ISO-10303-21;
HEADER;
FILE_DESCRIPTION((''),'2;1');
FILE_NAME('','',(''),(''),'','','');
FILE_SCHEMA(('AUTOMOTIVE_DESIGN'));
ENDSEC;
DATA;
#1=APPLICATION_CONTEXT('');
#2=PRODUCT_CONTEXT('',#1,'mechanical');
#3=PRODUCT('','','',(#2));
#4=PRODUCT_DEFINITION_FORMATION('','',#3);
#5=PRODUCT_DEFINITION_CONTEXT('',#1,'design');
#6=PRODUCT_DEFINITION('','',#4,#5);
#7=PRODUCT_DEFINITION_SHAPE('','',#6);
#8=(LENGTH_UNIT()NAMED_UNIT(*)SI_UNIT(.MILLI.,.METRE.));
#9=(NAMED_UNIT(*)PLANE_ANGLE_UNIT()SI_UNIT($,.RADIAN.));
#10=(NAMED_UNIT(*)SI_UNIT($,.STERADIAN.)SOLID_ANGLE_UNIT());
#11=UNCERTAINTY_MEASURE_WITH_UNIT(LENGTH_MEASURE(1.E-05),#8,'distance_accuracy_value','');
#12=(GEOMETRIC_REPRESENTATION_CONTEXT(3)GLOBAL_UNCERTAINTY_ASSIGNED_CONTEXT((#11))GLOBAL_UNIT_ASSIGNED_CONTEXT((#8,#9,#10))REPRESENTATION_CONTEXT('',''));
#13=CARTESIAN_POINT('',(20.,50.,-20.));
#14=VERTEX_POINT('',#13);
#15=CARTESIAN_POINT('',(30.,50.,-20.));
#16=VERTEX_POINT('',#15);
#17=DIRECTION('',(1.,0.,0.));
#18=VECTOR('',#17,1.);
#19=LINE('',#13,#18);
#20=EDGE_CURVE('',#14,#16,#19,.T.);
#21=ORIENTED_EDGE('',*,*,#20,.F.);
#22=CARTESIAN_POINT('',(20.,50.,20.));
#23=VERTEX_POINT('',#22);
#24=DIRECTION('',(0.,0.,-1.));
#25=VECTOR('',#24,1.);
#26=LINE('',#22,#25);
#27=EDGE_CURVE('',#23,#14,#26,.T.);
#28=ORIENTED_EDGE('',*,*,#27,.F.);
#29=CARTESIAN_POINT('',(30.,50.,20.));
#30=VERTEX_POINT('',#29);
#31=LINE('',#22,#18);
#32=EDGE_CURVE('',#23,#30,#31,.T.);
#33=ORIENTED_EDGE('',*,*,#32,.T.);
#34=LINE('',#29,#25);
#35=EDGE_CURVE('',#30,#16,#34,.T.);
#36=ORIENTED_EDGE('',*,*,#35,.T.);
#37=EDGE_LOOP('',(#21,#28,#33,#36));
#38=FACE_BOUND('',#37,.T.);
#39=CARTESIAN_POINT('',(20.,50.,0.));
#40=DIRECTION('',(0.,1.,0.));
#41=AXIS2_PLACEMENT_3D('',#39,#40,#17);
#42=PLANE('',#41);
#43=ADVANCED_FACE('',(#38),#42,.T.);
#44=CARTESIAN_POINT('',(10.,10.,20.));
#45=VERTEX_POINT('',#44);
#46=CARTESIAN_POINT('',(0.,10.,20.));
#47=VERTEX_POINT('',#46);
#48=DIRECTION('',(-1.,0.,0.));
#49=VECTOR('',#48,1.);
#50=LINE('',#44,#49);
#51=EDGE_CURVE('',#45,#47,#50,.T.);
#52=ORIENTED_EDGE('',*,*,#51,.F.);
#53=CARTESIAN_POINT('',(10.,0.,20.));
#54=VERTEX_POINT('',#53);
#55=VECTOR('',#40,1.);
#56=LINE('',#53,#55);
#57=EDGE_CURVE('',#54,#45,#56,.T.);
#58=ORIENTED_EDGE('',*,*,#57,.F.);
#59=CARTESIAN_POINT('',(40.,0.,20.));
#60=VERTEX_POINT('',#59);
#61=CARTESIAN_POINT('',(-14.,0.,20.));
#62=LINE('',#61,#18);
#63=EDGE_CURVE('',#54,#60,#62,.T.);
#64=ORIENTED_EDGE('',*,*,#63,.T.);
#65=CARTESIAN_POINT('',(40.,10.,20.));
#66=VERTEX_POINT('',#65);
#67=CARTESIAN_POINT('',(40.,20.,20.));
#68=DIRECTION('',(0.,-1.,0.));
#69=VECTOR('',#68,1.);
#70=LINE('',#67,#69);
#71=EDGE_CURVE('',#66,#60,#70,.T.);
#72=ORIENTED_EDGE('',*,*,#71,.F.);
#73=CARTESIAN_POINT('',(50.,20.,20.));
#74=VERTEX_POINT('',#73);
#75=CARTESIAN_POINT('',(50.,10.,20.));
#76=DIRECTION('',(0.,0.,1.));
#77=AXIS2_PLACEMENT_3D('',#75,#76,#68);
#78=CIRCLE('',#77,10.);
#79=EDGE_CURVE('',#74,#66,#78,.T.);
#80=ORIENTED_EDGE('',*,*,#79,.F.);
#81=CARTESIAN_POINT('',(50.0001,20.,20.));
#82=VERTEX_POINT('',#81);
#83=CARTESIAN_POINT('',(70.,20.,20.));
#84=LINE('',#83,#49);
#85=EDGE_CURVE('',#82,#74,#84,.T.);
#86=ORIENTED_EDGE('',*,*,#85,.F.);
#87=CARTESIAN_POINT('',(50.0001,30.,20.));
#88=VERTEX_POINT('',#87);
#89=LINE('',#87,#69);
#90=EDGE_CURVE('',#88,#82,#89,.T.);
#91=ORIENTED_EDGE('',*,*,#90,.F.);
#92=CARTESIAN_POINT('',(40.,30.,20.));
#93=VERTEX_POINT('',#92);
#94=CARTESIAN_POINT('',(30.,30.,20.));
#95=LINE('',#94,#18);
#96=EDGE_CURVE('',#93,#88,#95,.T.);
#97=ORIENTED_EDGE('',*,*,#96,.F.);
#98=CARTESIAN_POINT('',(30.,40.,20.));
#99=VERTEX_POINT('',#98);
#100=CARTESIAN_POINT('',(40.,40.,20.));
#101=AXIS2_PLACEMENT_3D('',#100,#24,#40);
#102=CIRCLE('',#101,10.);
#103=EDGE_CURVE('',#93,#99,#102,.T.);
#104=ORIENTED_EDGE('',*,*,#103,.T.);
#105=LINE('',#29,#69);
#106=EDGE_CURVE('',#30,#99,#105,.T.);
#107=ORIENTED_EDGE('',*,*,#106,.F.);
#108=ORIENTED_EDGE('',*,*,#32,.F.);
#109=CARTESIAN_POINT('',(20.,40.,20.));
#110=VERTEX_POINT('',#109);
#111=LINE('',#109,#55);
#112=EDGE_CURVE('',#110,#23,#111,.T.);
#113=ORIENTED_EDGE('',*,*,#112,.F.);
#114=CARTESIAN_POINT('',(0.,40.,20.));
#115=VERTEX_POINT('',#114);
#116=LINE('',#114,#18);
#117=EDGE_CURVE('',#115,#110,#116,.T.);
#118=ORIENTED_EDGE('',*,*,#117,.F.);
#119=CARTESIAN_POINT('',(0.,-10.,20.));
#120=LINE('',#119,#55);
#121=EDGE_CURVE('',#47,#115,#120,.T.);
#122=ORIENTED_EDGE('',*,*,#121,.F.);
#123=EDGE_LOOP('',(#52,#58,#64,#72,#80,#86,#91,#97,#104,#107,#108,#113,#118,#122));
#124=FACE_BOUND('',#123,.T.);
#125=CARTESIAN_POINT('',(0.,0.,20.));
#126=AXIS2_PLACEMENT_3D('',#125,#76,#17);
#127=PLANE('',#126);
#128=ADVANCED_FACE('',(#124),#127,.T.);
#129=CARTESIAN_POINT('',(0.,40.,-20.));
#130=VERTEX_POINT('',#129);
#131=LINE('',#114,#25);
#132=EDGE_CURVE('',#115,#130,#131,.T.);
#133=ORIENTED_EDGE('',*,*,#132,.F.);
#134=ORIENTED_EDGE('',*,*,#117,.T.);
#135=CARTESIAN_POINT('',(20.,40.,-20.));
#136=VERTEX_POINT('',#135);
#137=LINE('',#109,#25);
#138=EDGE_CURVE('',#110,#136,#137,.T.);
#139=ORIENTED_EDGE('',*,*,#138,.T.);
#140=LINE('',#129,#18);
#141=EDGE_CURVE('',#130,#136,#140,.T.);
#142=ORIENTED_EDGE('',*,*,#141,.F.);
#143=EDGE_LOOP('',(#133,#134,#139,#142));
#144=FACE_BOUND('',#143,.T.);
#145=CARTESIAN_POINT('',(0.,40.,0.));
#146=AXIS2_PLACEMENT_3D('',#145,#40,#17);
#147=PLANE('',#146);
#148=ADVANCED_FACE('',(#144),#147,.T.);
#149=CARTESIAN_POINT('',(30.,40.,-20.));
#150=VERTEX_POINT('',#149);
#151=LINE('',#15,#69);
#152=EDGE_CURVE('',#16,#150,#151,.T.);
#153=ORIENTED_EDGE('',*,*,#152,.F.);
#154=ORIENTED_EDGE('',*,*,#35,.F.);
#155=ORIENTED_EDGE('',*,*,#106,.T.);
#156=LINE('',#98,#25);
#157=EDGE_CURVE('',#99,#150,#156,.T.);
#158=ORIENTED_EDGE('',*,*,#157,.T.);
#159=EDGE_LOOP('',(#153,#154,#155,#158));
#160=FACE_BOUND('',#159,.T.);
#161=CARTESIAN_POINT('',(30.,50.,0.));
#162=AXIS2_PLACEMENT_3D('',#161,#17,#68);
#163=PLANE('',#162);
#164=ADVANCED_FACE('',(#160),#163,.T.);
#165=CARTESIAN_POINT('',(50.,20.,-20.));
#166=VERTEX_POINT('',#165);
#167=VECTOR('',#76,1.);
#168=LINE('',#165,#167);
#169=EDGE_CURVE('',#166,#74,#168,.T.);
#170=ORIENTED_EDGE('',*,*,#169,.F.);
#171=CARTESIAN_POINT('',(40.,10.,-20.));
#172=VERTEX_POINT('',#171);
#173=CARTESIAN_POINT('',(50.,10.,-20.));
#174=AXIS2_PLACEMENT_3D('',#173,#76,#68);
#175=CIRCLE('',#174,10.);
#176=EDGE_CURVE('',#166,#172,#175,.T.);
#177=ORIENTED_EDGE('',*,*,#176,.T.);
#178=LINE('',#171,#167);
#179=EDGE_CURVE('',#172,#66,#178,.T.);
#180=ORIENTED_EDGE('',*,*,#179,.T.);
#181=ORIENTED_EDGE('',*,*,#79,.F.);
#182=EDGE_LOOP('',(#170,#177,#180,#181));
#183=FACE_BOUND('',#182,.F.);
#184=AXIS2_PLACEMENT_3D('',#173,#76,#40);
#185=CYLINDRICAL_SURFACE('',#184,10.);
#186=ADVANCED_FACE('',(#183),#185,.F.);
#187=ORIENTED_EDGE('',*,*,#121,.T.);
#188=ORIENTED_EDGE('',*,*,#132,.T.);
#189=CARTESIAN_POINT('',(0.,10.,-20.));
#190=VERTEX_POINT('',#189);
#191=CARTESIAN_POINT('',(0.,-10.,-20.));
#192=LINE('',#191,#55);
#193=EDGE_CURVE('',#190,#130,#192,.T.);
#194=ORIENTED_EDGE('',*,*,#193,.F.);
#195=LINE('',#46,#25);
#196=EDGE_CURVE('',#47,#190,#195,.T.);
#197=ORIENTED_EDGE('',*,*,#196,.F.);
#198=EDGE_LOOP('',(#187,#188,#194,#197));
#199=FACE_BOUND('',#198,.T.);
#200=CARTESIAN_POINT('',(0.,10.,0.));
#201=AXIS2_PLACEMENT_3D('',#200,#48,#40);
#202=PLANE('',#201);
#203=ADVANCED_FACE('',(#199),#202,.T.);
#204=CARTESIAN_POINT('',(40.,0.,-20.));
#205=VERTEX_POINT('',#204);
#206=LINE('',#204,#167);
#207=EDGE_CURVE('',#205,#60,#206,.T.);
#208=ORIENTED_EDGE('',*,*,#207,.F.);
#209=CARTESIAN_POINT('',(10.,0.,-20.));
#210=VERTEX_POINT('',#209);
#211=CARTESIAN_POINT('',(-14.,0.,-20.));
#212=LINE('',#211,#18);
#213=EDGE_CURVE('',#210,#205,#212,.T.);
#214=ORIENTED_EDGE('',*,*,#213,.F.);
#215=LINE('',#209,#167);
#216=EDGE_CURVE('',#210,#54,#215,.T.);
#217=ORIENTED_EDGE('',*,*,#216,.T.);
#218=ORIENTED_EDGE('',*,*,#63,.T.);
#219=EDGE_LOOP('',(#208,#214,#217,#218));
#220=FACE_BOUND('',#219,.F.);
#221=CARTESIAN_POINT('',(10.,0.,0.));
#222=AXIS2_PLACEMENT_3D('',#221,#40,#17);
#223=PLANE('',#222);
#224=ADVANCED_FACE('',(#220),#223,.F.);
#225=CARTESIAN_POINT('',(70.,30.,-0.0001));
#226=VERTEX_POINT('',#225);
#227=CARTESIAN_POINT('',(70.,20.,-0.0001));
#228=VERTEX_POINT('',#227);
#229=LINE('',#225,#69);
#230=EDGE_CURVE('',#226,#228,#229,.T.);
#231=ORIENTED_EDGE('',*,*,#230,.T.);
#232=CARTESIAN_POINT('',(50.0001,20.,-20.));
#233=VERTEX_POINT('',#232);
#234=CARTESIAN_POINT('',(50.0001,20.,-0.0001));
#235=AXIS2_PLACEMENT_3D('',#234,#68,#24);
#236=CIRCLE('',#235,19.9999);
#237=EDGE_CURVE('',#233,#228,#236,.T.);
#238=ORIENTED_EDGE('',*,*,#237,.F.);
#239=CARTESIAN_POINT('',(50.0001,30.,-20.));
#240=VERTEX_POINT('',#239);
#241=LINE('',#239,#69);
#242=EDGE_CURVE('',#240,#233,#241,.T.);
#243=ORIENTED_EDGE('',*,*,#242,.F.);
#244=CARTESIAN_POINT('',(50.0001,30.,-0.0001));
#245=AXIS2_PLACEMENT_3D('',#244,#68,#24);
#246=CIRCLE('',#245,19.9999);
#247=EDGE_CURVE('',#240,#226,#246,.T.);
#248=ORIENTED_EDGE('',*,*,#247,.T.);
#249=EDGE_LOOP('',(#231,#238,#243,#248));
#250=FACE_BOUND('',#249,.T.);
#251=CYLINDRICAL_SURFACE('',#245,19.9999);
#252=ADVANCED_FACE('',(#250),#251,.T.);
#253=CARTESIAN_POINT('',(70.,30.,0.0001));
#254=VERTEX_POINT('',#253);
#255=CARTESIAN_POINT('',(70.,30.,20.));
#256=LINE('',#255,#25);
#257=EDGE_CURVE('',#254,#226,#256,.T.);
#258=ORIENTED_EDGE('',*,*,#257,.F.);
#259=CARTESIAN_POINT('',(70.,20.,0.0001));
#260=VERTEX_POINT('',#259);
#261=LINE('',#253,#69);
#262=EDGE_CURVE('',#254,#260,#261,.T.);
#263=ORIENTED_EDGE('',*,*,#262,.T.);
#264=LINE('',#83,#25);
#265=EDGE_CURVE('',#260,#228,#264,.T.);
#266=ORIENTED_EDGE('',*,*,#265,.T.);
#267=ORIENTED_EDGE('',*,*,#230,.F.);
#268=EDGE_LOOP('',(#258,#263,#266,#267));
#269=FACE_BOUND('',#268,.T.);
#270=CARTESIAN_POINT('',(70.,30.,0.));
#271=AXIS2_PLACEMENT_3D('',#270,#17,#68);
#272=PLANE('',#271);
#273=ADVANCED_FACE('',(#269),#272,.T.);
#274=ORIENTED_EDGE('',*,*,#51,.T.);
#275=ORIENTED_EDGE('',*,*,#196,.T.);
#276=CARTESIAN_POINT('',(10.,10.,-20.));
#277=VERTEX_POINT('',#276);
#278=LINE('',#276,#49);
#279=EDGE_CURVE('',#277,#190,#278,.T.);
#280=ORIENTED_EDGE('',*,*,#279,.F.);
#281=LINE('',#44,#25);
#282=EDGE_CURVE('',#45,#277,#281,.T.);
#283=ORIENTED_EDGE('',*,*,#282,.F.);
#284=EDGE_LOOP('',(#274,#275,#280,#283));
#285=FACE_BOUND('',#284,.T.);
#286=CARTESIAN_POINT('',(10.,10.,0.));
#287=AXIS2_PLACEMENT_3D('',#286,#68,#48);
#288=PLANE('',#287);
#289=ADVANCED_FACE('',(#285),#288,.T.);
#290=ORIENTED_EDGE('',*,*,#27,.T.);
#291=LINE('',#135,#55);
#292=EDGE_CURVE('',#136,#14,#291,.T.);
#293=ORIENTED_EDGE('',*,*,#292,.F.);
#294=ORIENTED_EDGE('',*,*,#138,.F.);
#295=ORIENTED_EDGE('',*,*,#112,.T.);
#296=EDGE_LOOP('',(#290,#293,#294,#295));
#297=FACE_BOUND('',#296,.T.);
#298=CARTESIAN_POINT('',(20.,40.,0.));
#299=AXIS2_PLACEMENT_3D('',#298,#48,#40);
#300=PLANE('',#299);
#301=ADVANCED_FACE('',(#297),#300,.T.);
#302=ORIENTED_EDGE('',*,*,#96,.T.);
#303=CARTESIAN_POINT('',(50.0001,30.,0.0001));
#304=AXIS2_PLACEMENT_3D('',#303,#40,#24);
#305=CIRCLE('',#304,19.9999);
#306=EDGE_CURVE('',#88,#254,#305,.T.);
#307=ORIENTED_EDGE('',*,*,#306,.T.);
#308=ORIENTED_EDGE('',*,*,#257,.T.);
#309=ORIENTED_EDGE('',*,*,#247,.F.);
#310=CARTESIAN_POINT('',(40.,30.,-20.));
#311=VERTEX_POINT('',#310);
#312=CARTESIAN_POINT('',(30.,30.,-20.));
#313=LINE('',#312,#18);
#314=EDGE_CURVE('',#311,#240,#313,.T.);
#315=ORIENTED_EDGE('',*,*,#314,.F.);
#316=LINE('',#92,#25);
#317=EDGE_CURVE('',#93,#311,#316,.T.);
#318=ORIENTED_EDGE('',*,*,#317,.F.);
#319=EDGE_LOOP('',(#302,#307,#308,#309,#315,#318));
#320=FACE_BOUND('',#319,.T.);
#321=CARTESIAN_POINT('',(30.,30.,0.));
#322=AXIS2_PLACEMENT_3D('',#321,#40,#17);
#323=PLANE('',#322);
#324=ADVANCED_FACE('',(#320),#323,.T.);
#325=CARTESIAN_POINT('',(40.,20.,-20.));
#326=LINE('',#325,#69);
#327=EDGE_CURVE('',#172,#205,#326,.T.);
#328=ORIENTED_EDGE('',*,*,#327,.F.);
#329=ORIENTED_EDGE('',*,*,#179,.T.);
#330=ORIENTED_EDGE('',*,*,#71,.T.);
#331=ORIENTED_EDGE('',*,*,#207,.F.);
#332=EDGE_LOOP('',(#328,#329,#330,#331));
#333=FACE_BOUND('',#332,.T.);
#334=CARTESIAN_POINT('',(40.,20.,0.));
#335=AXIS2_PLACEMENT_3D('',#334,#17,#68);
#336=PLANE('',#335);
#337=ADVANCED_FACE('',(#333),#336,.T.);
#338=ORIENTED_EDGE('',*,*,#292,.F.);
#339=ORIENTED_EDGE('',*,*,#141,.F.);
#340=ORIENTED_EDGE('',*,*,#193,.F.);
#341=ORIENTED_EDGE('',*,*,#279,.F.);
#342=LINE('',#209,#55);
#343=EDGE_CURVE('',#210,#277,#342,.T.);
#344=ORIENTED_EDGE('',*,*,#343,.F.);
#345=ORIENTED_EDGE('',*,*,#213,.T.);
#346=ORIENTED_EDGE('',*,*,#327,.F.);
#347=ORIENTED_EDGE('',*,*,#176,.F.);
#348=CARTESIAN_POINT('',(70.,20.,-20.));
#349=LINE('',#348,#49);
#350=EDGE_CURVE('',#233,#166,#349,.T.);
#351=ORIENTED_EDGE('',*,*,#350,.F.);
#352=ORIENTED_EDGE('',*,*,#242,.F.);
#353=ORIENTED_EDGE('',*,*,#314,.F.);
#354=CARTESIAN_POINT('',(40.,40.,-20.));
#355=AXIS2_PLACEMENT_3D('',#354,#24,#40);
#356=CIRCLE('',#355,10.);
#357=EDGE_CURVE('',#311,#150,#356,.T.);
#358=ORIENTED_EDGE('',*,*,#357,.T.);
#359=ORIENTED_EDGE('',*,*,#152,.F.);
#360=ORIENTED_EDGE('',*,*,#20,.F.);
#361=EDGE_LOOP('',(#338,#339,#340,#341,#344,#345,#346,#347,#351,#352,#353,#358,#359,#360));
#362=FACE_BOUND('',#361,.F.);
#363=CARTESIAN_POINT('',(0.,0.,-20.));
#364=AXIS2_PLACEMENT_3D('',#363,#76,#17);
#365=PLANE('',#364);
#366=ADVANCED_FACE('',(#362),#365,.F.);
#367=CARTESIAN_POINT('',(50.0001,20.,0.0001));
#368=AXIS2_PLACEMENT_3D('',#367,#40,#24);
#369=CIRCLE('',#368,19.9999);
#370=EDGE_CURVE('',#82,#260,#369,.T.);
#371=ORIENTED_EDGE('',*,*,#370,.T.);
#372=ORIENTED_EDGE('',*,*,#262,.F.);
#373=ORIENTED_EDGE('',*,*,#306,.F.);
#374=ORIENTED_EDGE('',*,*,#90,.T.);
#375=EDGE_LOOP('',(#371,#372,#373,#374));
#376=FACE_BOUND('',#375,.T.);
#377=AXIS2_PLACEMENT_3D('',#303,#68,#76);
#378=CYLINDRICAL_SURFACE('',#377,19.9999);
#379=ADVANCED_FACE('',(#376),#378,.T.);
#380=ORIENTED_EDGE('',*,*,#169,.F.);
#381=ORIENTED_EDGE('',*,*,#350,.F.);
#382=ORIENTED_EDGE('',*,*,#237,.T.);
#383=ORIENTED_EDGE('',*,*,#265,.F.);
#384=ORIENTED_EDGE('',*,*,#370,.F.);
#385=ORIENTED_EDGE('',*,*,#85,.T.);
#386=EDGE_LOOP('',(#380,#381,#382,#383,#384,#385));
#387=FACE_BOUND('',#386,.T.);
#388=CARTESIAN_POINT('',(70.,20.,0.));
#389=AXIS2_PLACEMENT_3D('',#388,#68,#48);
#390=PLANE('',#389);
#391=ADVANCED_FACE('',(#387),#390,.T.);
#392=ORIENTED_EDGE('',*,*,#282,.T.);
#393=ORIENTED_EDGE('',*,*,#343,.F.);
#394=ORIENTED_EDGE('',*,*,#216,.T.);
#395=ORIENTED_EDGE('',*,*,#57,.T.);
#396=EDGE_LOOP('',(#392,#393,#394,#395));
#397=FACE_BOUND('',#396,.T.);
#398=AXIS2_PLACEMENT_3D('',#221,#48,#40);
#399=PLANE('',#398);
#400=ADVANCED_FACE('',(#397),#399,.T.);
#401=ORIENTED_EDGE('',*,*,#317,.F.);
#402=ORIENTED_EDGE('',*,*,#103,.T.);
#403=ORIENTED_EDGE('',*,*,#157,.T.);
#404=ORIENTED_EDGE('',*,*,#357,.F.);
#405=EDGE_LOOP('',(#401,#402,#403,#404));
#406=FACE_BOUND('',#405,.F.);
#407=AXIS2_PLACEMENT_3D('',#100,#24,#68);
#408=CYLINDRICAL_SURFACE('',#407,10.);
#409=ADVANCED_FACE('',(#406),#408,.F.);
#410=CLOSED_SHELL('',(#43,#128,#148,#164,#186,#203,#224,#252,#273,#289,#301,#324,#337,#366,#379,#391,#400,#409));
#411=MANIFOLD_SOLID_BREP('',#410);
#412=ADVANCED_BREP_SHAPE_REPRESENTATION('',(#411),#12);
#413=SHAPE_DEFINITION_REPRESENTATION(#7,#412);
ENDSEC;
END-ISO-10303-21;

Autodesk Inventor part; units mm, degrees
ref_plane "YZ Plane" through (0, 0, 0) normal (1, 0, 0) x (0, 1, 0)
ref_plane "XZ Plane" through (0, 0, 0) normal (0, 1, 0) x (-1, 0, 0)
ref_plane "XY Plane" through (0, 0, 0) normal (0, 0, 1) x (1, 0, 0)
sketch "草圖1" plane through (0, 0, 0) normal (0, 0, 1) x (1, 0, 0)
  line L0 (-14, 0) -> (84, 0) projected
  line L1 (0, -10) -> (0, 60) projected
  line L2 (0, 10) -> (0, 40)
  line L3 (0, 40) -> (20, 40)
  line L4 (20, 40) -> (20, 50)
  line L5 (20, 50) -> (30, 50)
  line L6 (30, 50) -> (30, 30)
  line L7 (30, 30) -> (70, 30)
  line L8 (70, 30) -> (70, 20)
  line L9 (70, 20) -> (40, 20)
  line L10 (40, 20) -> (40, 0)
  line L11 (40, 0) -> (10, 0)
  line L12 (10, 0) -> (10, 10)
  line L13 (10, 10) -> (0, 10)
  point P0 (0, 0)
  dimension "d0" = 50
  dimension "d1" = 10
  dimension "d2" = 20
  dimension "d3" = 70
  dimension "d4" = 30
  dimension "d5" = 10
  dimension "d6" = 10
  dimension "d7" = 30
  dimension "d8" = 20
  dimension "d9" = 40
extrude "擠出1" add sketch "草圖1" along normal mid plane 40 contours L12 L13 L1 L3 L4 L5 L6 L7 L8 L9 L10 L0
fillet "圓角1" radius 20 2 edges at (70, 25, 20) (70, 25, -20)
fillet "圓角2" radius 10 1 edges at (40, 20, 0)
fillet "圓角3" radius 10 1 edges at (30, 30, 0)
